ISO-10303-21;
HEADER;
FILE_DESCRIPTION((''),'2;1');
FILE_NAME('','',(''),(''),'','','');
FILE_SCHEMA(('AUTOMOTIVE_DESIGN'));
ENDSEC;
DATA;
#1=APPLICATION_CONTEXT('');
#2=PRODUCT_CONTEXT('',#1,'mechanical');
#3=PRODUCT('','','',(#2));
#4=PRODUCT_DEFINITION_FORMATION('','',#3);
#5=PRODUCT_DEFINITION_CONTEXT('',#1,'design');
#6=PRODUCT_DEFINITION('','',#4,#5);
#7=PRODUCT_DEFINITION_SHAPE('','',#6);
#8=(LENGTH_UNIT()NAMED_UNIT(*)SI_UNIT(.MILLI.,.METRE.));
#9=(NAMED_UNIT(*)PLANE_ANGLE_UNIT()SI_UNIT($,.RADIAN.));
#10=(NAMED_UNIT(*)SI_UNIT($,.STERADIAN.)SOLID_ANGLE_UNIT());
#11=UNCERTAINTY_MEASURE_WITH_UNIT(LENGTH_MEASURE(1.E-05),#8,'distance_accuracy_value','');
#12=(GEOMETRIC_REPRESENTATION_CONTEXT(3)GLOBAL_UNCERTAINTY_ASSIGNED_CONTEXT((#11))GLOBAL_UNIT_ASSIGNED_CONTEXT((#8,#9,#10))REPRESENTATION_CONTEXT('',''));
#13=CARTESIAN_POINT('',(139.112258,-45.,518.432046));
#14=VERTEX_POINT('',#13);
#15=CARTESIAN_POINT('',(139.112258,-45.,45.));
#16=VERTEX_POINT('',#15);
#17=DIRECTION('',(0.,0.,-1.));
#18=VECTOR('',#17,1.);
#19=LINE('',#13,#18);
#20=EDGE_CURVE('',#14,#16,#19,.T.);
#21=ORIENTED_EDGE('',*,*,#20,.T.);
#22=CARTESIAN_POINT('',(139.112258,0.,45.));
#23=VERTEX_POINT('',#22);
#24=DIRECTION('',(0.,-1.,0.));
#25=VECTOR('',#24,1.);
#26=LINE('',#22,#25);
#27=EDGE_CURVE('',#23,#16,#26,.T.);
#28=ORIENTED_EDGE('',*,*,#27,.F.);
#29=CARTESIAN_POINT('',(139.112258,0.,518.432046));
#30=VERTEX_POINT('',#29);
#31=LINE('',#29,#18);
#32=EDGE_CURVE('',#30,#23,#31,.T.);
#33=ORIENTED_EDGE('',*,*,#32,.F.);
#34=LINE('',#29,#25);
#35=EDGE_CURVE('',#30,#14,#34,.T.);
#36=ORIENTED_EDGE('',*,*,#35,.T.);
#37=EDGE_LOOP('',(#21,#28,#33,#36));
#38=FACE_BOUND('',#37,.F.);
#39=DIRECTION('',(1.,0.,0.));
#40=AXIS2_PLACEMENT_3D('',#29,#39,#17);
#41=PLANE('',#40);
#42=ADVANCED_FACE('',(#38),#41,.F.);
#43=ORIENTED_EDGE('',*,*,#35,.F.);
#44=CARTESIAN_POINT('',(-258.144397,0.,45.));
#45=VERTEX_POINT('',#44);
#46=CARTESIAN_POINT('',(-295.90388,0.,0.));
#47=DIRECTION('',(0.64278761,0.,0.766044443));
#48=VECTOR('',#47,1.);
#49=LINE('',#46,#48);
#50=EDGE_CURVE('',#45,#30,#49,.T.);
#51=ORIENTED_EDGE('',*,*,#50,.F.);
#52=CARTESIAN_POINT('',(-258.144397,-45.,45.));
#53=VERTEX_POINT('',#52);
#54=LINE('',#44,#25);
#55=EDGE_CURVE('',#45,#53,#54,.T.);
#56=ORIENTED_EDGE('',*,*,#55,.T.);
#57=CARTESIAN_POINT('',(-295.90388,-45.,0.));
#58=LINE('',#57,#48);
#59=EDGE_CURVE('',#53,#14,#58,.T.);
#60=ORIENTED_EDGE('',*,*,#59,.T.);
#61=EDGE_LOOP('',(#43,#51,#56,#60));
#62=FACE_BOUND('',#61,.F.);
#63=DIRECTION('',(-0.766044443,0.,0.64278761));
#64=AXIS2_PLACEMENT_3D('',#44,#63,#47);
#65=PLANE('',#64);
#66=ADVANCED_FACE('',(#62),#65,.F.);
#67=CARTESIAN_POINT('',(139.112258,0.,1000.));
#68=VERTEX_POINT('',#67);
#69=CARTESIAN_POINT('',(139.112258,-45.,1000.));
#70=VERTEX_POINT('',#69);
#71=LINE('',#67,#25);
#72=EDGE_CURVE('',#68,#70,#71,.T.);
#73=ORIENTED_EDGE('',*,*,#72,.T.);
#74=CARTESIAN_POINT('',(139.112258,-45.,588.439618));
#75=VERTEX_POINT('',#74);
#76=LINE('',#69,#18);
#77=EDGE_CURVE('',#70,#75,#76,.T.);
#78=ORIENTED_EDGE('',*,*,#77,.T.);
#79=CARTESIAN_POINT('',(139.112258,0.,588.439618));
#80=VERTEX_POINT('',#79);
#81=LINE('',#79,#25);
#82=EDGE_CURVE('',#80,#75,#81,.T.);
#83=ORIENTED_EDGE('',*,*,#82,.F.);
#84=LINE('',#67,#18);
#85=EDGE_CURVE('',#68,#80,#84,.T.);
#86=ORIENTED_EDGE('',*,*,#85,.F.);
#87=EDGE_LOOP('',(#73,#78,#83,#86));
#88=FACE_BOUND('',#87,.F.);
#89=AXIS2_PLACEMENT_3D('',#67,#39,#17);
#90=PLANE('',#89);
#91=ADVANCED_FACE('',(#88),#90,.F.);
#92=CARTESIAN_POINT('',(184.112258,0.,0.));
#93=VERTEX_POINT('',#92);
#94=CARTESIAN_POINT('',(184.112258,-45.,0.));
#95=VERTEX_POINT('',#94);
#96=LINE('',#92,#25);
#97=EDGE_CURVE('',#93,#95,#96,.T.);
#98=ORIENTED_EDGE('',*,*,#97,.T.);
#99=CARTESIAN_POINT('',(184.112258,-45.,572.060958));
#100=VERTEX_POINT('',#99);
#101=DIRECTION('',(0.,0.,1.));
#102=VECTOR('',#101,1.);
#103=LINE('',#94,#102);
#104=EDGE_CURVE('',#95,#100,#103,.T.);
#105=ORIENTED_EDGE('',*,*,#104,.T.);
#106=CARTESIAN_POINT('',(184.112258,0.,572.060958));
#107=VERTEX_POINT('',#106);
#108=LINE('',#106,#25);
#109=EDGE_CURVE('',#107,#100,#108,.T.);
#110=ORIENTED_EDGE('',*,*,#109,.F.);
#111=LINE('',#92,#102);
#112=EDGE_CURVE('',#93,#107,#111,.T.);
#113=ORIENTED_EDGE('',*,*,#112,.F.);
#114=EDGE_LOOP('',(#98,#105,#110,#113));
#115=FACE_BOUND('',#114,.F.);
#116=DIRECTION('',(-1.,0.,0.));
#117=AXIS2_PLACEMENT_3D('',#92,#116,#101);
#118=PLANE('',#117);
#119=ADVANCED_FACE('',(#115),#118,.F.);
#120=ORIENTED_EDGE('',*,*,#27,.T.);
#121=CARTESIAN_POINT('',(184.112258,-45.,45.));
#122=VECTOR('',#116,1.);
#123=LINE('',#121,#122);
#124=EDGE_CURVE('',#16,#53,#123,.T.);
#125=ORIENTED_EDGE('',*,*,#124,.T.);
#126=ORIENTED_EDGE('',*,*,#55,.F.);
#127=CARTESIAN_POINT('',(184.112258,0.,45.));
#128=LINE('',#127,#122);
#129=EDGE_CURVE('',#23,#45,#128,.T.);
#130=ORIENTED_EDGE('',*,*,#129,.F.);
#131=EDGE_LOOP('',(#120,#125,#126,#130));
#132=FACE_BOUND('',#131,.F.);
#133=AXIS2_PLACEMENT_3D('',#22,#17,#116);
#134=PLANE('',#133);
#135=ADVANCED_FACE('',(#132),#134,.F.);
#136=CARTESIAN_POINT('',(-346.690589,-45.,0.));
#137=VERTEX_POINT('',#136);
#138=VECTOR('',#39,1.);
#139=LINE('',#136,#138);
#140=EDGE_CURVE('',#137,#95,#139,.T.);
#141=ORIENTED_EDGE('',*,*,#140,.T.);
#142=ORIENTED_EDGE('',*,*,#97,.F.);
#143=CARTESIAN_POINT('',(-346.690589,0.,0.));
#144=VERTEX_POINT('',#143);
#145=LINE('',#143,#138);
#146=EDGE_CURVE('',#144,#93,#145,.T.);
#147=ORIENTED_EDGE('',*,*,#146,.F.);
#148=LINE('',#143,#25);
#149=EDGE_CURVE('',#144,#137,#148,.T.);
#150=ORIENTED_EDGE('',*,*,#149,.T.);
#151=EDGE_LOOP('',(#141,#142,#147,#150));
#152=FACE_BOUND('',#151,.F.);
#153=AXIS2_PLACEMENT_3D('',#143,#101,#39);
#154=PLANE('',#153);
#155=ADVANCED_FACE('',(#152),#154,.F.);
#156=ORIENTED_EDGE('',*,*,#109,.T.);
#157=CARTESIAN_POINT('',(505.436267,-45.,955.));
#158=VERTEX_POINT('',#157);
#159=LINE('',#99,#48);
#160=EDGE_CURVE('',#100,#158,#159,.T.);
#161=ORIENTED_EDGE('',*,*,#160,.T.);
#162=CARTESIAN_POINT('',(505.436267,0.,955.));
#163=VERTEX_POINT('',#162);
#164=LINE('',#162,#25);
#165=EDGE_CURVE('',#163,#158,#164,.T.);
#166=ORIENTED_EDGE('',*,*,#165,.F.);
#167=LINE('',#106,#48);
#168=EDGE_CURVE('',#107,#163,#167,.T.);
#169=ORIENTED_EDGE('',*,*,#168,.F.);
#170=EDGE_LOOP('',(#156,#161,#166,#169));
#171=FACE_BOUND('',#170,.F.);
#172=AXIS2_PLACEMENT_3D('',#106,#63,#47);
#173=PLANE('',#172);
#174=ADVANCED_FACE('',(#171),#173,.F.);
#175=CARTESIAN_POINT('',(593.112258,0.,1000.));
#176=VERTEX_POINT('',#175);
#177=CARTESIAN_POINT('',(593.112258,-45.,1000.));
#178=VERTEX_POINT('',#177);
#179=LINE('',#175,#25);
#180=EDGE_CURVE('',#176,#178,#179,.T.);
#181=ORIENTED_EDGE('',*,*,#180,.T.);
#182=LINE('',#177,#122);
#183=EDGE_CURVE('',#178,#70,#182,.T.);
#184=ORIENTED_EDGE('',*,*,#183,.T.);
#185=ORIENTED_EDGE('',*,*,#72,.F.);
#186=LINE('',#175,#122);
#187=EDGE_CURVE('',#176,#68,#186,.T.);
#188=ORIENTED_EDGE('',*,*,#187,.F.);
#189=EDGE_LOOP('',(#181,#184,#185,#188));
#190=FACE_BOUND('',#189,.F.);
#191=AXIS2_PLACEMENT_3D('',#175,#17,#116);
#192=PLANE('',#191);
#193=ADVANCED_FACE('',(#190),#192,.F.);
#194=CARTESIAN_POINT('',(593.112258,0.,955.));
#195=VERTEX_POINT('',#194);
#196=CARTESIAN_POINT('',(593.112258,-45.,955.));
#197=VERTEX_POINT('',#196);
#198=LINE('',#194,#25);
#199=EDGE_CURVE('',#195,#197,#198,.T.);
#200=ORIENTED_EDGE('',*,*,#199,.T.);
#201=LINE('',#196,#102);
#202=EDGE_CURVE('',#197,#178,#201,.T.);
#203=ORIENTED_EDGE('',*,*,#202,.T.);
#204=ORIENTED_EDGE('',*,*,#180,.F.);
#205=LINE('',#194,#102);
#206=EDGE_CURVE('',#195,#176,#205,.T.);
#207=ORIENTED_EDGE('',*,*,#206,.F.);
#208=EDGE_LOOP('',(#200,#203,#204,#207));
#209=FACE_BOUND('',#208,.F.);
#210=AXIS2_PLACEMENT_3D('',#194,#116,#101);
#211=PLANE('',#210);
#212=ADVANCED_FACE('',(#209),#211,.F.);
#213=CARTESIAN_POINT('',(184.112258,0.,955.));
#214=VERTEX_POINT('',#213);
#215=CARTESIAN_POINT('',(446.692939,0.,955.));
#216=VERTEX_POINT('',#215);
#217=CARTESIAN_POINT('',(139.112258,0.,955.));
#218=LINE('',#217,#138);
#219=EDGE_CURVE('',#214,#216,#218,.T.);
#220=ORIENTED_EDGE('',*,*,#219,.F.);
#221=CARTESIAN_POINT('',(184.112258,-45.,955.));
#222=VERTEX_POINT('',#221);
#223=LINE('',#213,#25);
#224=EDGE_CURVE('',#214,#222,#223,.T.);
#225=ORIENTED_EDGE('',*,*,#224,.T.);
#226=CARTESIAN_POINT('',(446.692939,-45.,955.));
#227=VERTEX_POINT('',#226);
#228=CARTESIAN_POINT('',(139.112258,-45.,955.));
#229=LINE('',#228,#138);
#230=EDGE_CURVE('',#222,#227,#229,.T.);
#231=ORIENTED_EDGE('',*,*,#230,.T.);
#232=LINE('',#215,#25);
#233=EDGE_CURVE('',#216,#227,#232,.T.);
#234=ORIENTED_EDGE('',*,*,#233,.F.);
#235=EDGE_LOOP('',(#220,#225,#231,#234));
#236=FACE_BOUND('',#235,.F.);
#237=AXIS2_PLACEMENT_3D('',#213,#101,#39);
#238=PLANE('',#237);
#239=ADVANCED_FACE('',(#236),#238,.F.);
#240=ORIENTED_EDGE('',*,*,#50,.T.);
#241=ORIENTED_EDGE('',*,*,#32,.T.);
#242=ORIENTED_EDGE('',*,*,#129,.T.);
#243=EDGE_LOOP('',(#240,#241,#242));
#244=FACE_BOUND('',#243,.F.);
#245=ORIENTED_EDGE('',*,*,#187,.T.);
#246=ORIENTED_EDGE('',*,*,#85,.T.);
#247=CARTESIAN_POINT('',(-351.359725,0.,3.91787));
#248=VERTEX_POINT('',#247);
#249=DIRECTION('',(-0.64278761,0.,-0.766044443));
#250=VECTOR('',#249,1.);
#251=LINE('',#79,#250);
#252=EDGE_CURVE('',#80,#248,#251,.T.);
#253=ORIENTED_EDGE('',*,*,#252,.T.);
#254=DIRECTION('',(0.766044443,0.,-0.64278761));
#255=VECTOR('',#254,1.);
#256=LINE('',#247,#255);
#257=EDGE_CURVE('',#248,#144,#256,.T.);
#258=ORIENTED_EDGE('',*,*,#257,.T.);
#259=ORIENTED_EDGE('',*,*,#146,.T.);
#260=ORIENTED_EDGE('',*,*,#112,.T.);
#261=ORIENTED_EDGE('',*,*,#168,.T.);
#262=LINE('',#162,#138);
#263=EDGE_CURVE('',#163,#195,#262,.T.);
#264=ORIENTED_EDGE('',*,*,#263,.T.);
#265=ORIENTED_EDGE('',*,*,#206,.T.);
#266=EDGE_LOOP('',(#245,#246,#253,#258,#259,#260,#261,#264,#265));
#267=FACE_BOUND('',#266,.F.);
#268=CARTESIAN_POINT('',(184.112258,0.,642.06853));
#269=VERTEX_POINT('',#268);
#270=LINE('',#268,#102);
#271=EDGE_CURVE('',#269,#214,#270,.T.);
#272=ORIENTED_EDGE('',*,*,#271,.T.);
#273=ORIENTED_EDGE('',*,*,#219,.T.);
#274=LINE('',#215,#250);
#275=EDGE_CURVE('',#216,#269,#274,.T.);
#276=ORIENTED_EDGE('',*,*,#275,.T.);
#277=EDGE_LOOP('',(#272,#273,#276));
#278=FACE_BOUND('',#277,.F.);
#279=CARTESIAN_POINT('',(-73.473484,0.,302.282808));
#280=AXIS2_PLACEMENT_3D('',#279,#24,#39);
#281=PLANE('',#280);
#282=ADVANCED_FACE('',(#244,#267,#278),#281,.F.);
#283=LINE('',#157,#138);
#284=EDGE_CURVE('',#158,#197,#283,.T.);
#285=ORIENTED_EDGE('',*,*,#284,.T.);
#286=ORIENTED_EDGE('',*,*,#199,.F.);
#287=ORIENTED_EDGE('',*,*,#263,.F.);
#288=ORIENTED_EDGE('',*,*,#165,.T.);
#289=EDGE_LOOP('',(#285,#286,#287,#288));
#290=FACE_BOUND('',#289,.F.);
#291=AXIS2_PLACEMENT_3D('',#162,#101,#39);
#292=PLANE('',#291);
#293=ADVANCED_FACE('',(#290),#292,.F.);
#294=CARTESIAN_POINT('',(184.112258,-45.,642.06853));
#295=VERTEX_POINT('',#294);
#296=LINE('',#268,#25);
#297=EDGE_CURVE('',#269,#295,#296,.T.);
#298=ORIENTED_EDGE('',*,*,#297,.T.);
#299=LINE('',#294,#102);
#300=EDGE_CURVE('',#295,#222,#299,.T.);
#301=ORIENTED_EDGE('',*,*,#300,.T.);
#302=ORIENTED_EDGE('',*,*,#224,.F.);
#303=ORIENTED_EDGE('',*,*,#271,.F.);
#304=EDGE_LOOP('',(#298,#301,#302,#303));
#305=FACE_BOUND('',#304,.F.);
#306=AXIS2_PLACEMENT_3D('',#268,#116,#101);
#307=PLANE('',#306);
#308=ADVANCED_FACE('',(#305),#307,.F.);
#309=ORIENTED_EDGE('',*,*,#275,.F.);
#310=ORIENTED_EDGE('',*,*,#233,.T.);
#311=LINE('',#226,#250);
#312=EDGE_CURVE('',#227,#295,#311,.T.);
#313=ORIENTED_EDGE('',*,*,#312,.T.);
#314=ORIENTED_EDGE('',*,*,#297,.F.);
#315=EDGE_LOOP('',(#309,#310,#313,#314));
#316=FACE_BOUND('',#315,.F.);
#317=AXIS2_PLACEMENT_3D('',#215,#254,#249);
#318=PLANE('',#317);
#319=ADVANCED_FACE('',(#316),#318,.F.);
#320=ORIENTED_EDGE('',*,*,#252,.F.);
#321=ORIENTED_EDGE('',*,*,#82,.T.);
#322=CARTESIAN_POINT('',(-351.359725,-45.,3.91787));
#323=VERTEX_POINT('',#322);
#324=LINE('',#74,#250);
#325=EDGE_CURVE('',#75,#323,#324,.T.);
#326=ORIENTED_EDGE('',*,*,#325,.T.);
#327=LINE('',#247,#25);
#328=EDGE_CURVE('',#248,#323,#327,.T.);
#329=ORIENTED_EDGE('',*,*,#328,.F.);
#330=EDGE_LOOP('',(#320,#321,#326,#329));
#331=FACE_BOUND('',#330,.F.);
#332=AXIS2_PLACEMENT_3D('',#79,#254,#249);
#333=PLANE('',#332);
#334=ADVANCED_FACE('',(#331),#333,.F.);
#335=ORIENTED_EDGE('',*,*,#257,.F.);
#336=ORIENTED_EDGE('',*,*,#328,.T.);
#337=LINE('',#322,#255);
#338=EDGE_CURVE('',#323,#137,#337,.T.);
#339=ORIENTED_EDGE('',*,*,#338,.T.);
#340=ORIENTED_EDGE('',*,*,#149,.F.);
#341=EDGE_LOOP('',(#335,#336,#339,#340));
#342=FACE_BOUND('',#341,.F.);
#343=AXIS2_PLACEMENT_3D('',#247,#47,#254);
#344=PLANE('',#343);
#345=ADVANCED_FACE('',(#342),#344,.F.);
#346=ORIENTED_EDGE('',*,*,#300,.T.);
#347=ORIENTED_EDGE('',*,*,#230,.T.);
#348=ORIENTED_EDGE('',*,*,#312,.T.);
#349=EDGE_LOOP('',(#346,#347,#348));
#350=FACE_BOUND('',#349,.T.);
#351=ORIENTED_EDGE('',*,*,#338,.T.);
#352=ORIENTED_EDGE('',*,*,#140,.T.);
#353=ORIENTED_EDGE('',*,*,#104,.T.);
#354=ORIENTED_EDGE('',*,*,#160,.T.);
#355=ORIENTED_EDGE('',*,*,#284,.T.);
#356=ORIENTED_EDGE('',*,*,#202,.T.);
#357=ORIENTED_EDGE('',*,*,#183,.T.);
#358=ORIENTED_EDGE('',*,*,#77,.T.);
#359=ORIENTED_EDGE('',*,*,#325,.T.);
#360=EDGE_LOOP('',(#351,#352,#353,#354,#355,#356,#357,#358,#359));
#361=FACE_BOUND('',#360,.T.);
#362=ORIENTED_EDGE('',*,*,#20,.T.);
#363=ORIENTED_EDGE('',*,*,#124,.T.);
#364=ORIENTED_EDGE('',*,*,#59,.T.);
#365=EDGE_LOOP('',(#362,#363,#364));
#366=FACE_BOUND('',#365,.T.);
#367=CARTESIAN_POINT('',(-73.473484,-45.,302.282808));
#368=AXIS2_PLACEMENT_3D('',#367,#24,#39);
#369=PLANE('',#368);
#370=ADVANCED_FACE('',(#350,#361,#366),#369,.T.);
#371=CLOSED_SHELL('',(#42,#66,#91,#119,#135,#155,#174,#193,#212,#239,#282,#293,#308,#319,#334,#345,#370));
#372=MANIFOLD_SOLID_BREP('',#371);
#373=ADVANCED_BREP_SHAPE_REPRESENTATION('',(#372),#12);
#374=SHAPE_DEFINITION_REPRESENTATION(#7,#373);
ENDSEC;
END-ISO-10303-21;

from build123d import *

# Parameters (mm, degrees)
F0_W     = 45
F0_H     = 45
F1_DEPTH = 45


with BuildPart() as f1:
    # F0 (on Front) → F1 (new body)
    with BuildSketch(Plane.XZ):
        Polygon((139.1122582526, 518.4320460093), (139.1122582526, 588.439618218), (-316.8877249613, 45), (-258.1443969413, 45), align=None)
        Polygon((-258.1443969413, 45), (-316.8877249613, 45), (-351.3597249985, 3.9178701118), (-346.6905892175, 0), (-295.9038803443, 0), align=None)
        Polygon((139.1122582526, 0), (139.1122582526, 45), (-258.1443969413, 45), (-295.9038803443, 0), align=None)
        with Locations((161.6122582526, 22.5)):
            Rectangle(F0_W, F0_H)
        Polygon((184.1122582526, 45), (184.1122582526, 572.060957676), (139.1122582526, 518.4320460093), (139.1122582526, 45), align=None)
        Polygon((184.1122582526, 600), (148.8125703421, 600), (139.1122582526, 588.439618218), (139.1122582526, 518.4320460093), (184.1122582526, 572.060957676), align=None)
        Polygon((184.1122582526, 642.0685298847), (184.1122582526, 600), (184.1122582526, 572.060957676), (505.43626743, 955), (446.6929394101, 955), align=None)
        with Locations((161.6122582526, 977.5)):
            Rectangle(F0_W, F0_H)
        Polygon((184.1122582526, 1000), (184.1122582526, 955), (446.6929394101, 955), (484.264167594, 999.7756461664), (518.7361675344, 970.8502037305), (505.43626743, 955), (593.1122582526, 955), (593.1122582526, 1000), align=None)
        Polygon((139.1122582526, 588.439618218), (148.8125703421, 600), (184.1122582526, 642.0685298847), (184.1122582526, 955), (139.1122582526, 955), align=None)
        Polygon((484.264167594, 999.7756461664), (446.6929394101, 955), (505.43626743, 955), (518.7361675344, 970.8502037305), align=None)
        Polygon((184.1122582526, 642.0685298847), (148.8125703421, 600), (184.1122582526, 600), align=None)
    extrude(amount=F1_DEPTH)


solid = f1.part
